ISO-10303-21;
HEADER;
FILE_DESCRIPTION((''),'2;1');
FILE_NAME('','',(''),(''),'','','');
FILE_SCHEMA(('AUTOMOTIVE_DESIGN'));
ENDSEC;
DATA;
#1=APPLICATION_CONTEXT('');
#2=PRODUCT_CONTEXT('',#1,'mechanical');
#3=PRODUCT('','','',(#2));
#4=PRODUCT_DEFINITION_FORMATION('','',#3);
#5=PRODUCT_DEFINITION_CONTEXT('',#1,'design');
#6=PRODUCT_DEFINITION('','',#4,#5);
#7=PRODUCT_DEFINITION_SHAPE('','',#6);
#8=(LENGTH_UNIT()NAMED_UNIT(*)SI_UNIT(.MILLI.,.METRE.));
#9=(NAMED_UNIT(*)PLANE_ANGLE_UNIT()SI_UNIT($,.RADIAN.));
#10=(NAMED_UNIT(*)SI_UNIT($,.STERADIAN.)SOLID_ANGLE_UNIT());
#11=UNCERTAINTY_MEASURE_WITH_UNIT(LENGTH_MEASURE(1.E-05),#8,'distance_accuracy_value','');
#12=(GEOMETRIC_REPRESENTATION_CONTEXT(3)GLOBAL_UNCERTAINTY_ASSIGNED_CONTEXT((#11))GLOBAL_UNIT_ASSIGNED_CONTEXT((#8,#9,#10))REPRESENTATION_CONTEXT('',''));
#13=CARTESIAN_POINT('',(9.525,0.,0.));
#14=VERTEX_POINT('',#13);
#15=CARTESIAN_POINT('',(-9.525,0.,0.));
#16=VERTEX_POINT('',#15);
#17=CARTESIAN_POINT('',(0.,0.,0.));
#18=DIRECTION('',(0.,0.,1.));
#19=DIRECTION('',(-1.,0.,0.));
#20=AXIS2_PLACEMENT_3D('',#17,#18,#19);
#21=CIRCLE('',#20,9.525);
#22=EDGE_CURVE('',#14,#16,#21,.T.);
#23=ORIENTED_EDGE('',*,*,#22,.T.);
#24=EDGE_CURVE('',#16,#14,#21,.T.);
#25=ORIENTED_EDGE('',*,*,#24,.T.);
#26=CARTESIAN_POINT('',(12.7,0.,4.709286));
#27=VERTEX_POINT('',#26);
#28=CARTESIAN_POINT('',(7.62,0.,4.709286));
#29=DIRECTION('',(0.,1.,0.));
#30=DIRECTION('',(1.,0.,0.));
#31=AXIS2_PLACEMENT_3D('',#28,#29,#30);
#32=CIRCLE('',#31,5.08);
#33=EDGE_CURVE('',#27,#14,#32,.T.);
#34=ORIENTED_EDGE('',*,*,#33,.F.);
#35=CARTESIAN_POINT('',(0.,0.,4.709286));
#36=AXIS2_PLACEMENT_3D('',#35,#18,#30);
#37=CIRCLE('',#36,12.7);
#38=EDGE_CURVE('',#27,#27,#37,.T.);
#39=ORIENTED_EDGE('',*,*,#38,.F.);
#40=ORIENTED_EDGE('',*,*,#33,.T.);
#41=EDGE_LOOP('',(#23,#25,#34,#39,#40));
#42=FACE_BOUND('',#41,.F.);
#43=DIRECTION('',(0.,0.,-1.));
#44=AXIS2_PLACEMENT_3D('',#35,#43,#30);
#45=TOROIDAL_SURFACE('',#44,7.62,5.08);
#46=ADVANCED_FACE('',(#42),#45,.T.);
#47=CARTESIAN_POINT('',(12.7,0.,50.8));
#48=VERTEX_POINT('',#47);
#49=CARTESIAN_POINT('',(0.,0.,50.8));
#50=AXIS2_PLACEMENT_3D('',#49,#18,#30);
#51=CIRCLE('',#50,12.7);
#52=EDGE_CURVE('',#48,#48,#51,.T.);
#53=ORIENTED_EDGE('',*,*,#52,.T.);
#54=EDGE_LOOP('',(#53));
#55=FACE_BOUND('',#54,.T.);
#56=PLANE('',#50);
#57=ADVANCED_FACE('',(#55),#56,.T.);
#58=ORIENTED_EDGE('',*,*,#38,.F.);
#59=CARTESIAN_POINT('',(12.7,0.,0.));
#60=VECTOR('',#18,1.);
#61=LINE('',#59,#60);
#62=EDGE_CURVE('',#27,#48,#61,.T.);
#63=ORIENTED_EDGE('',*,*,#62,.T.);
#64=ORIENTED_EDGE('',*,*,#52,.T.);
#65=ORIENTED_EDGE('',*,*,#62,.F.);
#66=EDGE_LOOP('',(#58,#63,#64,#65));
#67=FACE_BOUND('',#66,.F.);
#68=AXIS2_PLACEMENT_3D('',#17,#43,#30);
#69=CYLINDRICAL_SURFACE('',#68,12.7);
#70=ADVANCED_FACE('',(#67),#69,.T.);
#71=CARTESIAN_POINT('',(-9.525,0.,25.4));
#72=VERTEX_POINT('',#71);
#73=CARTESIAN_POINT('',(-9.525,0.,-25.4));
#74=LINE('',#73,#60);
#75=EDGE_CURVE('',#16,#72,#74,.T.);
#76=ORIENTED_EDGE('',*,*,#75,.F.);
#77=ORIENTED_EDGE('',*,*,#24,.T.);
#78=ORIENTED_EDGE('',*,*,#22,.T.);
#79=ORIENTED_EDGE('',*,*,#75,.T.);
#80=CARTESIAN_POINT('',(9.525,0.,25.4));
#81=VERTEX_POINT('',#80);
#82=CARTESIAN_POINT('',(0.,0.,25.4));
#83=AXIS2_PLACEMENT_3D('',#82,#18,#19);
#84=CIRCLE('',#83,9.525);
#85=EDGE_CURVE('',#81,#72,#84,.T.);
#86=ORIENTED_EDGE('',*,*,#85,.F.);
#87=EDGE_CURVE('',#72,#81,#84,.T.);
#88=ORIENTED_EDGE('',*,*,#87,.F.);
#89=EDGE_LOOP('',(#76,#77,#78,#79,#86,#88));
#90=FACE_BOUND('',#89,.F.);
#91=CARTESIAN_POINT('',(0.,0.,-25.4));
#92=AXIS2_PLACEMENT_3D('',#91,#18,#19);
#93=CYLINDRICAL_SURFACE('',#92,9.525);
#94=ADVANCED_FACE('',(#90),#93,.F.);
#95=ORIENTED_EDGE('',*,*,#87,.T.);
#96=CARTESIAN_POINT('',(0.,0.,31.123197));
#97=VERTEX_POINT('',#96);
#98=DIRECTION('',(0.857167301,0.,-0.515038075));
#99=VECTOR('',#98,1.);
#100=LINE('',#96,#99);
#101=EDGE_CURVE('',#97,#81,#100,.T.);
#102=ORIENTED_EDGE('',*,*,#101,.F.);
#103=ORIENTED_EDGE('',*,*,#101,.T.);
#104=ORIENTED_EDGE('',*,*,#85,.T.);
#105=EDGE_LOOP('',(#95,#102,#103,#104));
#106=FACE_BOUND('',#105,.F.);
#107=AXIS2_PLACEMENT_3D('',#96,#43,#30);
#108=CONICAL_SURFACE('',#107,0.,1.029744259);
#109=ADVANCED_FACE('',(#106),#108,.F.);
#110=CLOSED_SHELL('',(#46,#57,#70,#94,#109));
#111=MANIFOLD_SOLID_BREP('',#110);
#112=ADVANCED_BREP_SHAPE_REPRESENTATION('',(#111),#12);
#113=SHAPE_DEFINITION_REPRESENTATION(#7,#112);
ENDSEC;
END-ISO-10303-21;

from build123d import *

# Parameters (mm, degrees)
F0_R     = 12.7
F1_DEPTH = 50.8
F3_D     = 19.05
F3_DEPTH = 25.4
F3_TIP   = 5.7231973962


# Not quite as in the source:
# - a fillet or chamfer that OpenCascade refuses, or shapes differently, is made with other operations: its cross-section is extruded or revolved along the edge and cut away or added


with BuildPart() as f1:
    # F0 (on Top) → F1 (new body)
    with BuildSketch(Plane.XY):
        Circle(F0_R)
    extrude(amount=F1_DEPTH)

    # F3
    with Locations(Plane(origin=(0, 0, 0), x_dir=(1, 0, 0), z_dir=(0, 0, -1))):
        with Locations((0, 0)):
            Hole(F3_D / 2, depth=F3_DEPTH)
            with Locations((0, 0, -(F3_DEPTH + F3_TIP / 2))):  # 118° drill point
                Cone(0, F3_D / 2, F3_TIP, mode=Mode.SUBTRACT)

    # F4: fillet of radius 5.08 on 1 edges, made by hand

    # F4_s1 → F4_t2 (revolve, cut)
    with BuildSketch(Plane.XZ):
        with BuildLine():
            ThreePointArc((12.7, 4.7092860393), (11.8321134838, 1.8694797079), (9.525, 0))
            Line((9.525, 0), (12.7, 0))
            Line((12.7, 0), (12.7, 4.7092860393))
        make_face()
    revolve(axis=Axis((0, 0, 0), (0, 0, 1)), mode=Mode.SUBTRACT)


solid = f1.part
